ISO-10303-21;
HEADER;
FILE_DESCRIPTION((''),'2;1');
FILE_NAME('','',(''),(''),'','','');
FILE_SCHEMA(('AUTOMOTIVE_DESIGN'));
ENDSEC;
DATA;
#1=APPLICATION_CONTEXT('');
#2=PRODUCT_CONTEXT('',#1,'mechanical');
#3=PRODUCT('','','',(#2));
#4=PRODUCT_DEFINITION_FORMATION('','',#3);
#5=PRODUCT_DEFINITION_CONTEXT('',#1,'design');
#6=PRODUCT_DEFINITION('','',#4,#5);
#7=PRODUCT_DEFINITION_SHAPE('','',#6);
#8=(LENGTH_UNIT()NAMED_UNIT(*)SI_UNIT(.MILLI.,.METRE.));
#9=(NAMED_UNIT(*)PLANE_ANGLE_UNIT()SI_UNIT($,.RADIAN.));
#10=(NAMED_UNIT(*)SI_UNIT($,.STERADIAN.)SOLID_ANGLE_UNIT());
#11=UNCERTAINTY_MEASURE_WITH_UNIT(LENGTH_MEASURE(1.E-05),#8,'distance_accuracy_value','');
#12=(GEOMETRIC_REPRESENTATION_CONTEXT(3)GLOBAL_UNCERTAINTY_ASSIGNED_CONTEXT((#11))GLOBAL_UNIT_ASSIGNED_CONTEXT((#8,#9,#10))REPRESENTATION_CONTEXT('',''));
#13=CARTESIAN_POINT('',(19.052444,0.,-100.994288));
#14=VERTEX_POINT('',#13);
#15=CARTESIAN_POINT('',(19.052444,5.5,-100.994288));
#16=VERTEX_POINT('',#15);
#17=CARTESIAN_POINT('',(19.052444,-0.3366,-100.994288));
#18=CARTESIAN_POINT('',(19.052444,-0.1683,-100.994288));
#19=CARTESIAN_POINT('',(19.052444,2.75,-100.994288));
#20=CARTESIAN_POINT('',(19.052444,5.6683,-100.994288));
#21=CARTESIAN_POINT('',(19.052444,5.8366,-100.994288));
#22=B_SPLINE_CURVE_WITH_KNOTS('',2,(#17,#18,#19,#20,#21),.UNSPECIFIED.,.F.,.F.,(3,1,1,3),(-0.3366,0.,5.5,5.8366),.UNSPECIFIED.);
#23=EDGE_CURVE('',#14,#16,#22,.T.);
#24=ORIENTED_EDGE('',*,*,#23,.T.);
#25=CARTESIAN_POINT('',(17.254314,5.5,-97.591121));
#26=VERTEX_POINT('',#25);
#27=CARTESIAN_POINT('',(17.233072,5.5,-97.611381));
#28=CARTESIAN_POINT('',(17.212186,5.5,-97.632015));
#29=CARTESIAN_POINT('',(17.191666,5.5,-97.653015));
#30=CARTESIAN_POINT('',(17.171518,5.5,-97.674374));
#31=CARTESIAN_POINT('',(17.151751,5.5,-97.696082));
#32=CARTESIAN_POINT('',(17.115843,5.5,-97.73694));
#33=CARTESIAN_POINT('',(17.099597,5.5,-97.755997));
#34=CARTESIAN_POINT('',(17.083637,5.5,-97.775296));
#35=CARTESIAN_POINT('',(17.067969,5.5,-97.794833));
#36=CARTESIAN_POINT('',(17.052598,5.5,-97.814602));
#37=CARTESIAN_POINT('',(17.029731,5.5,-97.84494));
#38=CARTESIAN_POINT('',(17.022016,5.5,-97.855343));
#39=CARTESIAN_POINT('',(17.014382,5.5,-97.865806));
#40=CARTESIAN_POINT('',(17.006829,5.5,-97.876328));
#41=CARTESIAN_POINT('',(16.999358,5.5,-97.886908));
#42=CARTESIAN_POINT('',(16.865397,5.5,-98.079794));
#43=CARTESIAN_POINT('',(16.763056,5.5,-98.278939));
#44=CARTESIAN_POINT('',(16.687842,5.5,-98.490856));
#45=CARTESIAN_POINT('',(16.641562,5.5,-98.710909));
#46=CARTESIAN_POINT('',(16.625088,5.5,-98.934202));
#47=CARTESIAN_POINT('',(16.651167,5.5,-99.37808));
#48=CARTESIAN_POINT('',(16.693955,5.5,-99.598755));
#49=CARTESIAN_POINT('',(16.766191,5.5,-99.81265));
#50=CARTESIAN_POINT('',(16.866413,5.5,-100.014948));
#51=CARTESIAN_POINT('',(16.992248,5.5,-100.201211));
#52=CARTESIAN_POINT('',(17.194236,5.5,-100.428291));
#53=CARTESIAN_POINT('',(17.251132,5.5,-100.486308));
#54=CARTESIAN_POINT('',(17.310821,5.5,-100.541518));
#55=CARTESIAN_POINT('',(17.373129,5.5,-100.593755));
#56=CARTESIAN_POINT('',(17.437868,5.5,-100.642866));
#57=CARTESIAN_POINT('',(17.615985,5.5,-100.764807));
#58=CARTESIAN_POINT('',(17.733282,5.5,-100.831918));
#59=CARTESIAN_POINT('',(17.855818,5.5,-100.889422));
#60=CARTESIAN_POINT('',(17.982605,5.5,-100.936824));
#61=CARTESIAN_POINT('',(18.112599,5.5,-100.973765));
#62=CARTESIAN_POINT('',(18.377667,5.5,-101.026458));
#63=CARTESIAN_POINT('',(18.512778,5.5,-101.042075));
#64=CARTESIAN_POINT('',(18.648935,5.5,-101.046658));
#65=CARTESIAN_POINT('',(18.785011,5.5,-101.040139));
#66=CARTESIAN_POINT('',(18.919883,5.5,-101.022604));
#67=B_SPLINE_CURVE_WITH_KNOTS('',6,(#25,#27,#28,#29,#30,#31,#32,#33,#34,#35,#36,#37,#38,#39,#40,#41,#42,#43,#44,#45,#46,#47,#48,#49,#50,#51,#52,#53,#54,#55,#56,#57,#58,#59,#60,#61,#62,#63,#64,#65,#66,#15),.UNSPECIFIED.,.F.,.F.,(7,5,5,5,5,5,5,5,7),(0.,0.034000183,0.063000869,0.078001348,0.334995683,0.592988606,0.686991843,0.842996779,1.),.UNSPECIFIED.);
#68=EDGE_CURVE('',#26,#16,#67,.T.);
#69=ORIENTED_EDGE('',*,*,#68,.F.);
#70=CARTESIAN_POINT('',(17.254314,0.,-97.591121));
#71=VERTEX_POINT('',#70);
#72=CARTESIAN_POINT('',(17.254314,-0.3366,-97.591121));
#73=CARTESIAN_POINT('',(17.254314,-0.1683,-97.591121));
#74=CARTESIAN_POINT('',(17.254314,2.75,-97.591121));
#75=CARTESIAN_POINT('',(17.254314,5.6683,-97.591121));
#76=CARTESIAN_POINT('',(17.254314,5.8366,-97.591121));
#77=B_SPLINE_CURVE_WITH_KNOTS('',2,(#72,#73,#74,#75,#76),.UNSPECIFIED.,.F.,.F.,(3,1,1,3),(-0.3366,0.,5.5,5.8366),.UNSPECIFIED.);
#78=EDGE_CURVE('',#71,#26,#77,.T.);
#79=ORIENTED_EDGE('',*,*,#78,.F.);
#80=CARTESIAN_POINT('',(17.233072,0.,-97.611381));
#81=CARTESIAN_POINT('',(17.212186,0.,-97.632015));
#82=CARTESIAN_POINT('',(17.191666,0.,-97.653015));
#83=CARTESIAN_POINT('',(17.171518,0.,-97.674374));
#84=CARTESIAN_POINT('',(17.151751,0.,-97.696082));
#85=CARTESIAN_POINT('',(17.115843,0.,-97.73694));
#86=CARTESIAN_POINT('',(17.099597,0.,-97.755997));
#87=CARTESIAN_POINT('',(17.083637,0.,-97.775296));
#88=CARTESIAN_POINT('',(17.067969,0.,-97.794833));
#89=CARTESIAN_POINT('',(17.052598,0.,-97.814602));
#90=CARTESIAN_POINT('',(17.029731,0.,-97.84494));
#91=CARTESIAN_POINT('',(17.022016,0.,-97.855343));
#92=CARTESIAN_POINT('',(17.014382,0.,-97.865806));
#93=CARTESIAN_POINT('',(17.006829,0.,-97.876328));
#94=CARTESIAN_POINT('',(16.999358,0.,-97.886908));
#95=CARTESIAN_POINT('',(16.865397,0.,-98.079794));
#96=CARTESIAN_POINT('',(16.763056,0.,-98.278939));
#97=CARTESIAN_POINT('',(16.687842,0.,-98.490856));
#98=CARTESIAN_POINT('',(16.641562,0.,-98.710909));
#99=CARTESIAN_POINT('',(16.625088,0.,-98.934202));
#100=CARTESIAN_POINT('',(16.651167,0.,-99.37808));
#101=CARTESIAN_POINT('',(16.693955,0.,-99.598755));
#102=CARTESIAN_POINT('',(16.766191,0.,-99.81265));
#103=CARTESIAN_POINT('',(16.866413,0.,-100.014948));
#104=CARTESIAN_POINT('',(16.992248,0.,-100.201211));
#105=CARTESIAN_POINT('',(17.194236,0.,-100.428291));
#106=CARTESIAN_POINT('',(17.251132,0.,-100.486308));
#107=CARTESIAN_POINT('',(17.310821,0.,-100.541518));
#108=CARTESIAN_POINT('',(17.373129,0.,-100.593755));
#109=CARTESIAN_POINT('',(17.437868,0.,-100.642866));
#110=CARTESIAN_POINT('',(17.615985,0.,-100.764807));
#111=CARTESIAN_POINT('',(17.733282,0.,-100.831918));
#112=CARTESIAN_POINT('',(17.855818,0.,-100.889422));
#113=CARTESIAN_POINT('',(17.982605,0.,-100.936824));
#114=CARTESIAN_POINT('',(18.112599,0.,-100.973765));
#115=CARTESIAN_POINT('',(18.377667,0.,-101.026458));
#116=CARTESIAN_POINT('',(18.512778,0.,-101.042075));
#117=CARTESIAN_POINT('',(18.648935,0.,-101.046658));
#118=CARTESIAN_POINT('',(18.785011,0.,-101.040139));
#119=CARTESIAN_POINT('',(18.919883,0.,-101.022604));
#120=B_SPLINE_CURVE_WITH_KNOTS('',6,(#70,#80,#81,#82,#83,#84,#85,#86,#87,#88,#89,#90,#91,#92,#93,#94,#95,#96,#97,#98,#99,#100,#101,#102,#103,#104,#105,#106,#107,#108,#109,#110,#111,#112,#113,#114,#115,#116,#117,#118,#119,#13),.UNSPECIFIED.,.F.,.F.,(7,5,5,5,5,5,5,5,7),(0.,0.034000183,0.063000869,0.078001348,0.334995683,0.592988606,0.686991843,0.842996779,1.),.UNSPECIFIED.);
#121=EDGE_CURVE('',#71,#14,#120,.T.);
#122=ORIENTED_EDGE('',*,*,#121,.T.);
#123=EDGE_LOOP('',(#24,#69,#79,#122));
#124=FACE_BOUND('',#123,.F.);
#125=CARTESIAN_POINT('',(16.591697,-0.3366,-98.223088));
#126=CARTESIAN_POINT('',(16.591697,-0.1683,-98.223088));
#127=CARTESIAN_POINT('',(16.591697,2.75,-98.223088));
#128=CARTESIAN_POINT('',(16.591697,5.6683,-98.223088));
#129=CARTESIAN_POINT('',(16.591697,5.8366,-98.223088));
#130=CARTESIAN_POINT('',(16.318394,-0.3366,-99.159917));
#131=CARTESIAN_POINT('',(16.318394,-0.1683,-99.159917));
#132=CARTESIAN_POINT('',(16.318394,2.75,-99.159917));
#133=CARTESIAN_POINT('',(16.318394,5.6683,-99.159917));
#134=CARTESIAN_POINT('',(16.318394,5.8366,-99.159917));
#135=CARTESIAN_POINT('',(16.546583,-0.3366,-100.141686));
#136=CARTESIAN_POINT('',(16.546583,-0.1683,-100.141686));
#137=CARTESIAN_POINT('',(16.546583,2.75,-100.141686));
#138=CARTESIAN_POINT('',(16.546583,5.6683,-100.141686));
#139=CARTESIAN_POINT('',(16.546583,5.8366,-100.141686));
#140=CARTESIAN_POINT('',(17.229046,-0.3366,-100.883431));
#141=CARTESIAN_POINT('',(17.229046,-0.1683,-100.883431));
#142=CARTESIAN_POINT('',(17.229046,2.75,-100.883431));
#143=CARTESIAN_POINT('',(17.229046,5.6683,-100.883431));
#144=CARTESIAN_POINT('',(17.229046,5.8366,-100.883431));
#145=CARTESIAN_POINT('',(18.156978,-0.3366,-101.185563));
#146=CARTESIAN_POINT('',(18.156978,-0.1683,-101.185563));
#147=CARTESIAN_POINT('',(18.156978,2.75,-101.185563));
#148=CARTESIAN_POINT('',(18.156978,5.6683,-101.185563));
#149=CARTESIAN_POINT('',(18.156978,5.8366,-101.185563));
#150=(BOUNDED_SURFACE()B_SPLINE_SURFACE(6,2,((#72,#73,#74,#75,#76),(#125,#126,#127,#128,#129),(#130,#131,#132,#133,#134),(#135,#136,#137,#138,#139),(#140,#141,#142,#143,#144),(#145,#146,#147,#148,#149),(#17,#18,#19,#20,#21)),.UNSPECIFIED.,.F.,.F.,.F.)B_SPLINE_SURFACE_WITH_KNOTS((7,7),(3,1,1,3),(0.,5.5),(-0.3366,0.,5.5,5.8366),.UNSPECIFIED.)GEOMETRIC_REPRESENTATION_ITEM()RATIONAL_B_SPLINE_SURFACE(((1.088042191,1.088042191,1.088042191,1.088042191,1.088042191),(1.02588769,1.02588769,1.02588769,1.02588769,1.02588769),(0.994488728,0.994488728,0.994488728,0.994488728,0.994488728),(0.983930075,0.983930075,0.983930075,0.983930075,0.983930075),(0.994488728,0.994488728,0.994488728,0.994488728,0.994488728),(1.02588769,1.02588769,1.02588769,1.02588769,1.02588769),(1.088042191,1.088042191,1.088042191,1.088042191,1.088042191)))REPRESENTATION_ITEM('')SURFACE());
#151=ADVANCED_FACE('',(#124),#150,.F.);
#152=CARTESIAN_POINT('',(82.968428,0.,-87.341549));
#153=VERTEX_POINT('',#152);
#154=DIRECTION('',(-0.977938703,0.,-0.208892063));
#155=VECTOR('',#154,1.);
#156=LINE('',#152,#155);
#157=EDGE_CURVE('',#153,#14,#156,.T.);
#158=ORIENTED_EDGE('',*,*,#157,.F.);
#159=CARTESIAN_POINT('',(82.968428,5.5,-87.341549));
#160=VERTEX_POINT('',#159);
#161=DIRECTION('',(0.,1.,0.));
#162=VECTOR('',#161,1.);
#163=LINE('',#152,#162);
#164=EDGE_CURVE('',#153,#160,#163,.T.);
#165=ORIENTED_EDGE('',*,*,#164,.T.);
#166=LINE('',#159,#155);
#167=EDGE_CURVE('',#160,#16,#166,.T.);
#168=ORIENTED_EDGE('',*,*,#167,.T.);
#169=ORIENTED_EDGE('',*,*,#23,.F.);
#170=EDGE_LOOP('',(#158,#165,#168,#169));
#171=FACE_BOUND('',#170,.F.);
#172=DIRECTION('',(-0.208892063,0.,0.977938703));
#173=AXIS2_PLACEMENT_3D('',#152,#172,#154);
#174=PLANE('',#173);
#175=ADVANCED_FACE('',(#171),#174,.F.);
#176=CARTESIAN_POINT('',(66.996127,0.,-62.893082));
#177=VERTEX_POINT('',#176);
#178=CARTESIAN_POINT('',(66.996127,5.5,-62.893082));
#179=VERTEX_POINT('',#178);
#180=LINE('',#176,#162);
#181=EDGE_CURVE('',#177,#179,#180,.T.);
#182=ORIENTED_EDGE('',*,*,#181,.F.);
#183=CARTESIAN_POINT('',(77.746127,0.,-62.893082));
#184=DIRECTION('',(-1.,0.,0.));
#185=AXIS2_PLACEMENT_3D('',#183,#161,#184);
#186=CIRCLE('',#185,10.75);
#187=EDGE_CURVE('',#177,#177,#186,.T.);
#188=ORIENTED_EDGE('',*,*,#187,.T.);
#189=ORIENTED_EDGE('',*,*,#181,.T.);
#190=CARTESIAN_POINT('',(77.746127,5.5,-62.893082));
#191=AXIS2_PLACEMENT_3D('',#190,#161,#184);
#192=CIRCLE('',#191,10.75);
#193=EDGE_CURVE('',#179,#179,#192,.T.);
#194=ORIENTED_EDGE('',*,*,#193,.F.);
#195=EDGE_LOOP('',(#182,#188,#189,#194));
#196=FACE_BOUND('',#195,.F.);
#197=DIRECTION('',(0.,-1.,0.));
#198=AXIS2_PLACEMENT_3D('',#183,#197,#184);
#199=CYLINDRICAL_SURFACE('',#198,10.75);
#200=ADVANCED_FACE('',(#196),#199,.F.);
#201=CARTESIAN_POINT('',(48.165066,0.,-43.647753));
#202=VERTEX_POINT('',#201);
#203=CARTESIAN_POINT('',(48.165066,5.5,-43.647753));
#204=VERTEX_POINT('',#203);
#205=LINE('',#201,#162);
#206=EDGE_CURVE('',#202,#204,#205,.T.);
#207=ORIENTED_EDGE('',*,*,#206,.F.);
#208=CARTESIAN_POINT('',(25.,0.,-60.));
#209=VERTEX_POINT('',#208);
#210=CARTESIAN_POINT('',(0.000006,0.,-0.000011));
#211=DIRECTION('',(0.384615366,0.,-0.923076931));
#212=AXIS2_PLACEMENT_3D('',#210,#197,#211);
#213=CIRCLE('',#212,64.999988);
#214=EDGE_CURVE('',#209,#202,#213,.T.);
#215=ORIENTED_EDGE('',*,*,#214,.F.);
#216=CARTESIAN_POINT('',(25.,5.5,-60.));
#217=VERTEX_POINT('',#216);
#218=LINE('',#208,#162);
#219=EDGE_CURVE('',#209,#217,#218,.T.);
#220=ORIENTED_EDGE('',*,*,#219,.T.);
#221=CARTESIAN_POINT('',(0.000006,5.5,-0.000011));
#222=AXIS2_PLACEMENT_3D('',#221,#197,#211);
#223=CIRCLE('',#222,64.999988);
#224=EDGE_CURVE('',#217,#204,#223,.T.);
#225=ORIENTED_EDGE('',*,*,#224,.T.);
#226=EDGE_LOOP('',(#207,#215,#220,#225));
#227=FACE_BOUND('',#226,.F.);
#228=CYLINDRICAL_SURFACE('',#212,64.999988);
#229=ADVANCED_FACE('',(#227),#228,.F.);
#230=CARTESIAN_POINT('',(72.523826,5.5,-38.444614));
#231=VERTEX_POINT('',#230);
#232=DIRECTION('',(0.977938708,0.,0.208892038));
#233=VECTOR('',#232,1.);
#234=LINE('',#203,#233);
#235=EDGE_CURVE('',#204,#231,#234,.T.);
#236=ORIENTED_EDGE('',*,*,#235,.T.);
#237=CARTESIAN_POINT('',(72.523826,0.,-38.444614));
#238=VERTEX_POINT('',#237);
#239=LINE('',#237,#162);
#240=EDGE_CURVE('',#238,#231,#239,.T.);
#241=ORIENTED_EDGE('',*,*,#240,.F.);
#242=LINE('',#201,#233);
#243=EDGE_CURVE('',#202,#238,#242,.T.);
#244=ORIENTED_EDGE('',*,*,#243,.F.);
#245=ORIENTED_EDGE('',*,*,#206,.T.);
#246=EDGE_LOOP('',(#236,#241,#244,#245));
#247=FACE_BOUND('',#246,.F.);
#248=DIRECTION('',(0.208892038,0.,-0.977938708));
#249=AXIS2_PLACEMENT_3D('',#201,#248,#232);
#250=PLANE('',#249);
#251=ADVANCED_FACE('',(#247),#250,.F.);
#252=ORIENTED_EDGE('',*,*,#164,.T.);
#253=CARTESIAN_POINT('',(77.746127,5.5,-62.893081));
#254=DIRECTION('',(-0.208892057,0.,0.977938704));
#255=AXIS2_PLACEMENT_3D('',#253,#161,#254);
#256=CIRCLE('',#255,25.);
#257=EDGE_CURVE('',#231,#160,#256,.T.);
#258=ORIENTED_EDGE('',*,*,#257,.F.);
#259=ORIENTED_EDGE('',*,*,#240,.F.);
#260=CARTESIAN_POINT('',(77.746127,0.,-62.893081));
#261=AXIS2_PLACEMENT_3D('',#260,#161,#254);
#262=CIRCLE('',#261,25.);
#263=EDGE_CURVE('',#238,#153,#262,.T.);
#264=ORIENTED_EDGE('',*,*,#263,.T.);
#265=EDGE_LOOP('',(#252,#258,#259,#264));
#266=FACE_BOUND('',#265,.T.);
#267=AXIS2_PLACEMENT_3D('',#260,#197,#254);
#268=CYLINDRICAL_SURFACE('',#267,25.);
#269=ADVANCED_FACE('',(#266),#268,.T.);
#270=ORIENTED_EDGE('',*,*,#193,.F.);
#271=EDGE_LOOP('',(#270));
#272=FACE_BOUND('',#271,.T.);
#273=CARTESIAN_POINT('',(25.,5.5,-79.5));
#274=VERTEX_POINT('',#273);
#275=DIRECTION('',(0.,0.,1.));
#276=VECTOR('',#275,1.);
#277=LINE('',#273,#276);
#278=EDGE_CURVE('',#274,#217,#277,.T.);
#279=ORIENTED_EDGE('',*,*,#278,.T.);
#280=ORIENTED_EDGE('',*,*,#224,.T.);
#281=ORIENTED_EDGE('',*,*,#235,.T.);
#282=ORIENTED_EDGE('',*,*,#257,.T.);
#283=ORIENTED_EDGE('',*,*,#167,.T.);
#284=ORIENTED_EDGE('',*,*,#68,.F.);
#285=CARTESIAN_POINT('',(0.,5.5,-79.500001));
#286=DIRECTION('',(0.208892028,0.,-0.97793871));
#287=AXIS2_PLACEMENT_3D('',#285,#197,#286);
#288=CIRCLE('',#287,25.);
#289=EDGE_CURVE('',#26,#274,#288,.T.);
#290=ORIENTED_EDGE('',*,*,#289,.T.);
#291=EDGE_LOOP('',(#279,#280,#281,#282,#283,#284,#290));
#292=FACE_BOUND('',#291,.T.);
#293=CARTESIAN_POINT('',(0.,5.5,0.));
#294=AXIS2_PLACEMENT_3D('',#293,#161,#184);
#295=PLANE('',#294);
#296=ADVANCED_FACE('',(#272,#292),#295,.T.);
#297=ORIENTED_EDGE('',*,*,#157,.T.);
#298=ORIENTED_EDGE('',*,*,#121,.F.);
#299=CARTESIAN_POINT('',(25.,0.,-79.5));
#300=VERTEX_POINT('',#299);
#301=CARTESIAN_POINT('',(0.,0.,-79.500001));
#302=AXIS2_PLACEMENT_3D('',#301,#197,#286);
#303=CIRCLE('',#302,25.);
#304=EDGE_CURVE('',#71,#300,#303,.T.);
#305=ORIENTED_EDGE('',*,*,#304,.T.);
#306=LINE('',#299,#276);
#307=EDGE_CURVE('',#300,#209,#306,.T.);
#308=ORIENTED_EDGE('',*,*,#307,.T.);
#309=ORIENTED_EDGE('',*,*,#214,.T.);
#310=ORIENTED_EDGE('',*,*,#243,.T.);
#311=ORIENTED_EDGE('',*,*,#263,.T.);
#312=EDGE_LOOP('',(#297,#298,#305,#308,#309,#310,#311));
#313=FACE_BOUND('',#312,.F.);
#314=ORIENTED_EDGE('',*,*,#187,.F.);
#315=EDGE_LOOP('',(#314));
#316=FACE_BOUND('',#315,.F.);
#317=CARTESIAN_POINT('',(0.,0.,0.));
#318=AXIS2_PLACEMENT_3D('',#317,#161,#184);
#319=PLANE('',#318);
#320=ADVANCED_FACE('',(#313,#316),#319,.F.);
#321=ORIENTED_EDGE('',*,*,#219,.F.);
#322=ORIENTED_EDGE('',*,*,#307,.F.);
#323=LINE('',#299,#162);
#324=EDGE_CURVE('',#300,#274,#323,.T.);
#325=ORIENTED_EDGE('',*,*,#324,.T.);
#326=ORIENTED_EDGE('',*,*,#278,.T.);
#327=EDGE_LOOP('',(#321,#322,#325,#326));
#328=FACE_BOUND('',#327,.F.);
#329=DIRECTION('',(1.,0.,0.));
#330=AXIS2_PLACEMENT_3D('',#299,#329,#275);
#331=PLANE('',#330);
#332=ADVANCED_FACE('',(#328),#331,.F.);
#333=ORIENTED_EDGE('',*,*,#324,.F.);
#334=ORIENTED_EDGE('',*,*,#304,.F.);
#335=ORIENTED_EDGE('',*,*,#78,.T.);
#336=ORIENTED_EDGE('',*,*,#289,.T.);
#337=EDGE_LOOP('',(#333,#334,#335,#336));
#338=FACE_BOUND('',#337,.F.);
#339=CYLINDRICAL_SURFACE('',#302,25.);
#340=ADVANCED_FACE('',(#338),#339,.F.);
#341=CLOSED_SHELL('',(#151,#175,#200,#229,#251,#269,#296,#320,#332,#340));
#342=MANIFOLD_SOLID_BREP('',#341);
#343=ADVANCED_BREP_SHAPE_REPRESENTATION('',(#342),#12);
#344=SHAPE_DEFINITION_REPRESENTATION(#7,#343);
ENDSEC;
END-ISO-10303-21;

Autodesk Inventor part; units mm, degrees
ref_plane "YZ Plane" through (0, 0, 0) normal (1, 0, 0) x (0, 1, 0)
ref_plane "XZ Plane" through (0, 0, 0) normal (0, 1, 0) x (-1, 0, 0)
ref_plane "XY Plane" through (0, 0, 0) normal (0, 0, 1) x (1, 0, 0)
sketch "スケッチ1" plane through (0, 0, 0) normal (0, 1, 0) x (-1, 0, 0)
  line L0 (25, 0) -> (-25, 0)
  line L1 (-25, 0) -> (-25, -104.5)
  line L2 (-25, -104.5) -> (25, -104.5)
  line L3 (25, -104.5) -> (25, 0)
  circle A0 centre (0, 0) radius 25
  circle A1 centre (0, 0) radius 57 construction
  circle A2 centre (0, 0) radius 75 construction
  circle A3 centre (0, 0) radius 10.75
  circle A4 centre (-77.746127, -62.893082) radius 25
  circle A5 centre (-77.746127, -62.893082) radius 10.75
  line L4 (-77.746127, -62.893082) -> (-82.968428, -87.341549)
  line L5 (-82.968428, -87.341549) -> (-5.222301, -103.948468)
  line L6 (5.222301, -55.051532) -> (-72.523826, -38.444614)
  circle A6 centre (0, -79.5) radius 25
  circle A7 centre (0, 0) radius 82
  circle A8 centre (0, 0) radius 65
  line L7 (-48.165066, -43.647753) -> (-96.972293, -33.222313)
  line L8 (-96.972293, -33.222313) -> (-92.794452, -13.663539)
  line L9 (-92.794452, -13.663539) -> (-43.987225, -24.088979)
  line L10 (-43.987225, -24.088979) -> (-48.165066, -43.647753)
  line L11 (-96.972293, -33.222313) -> (-102.194595, -57.67078)
  point P0 (-25, -79.5)
  point P1 (-25, -48.595915)
  point P2 (-25, -60)
  point P3 (-48.165066, -43.647753)
  point P4 (-61.75052, -20.294661)
  dimension "d22" = 130
  dimension "d0" = 114
  dimension "d2" = 150
  dimension "d4" = 21.5
  dimension "d5" = 50
  dimension "d19" = 79.5
  dimension "d20" = 79.5
  dimension "d21" = 164
  dimension "d23" = 20
sketch "スケッチ1 outline for 押し出し1" plane through (0, 0, 0) normal (0, 1, 0) x (-1, 0, 0)
  arc A0 (-72.523826, -38.444614) -> (-82.968428, -87.341549) centre (-77.746127, -62.893082) ccw
  line L0 (-82.968428, -87.341549) -> (-5.222301, -103.948468)
  arc A1 (-5.222301, -103.948468) -> (-25, -79.5) centre (0, -79.5) cw
  line L1 (-25, -79.5) -> (-25, -60)
  arc A2 (-25, -60) -> (-48.165066, -43.647753) centre (0, 0) cw
  line L2 (-48.165066, -43.647753) -> (-72.523826, -38.444614)
  circle A3 centre (-77.746127, -62.893082) radius 10.75
extrude "押し出し1" add sketch "スケッチ1 outline for 押し出し1" along normal blind 5.5
fillet "フィレット1" radius 2 1 edges at (5.2223, 2.75, -103.9485)
equation "\"d20\" = d19"
properties part number "gear_plate_3" material "木材 (カエデ材)"
